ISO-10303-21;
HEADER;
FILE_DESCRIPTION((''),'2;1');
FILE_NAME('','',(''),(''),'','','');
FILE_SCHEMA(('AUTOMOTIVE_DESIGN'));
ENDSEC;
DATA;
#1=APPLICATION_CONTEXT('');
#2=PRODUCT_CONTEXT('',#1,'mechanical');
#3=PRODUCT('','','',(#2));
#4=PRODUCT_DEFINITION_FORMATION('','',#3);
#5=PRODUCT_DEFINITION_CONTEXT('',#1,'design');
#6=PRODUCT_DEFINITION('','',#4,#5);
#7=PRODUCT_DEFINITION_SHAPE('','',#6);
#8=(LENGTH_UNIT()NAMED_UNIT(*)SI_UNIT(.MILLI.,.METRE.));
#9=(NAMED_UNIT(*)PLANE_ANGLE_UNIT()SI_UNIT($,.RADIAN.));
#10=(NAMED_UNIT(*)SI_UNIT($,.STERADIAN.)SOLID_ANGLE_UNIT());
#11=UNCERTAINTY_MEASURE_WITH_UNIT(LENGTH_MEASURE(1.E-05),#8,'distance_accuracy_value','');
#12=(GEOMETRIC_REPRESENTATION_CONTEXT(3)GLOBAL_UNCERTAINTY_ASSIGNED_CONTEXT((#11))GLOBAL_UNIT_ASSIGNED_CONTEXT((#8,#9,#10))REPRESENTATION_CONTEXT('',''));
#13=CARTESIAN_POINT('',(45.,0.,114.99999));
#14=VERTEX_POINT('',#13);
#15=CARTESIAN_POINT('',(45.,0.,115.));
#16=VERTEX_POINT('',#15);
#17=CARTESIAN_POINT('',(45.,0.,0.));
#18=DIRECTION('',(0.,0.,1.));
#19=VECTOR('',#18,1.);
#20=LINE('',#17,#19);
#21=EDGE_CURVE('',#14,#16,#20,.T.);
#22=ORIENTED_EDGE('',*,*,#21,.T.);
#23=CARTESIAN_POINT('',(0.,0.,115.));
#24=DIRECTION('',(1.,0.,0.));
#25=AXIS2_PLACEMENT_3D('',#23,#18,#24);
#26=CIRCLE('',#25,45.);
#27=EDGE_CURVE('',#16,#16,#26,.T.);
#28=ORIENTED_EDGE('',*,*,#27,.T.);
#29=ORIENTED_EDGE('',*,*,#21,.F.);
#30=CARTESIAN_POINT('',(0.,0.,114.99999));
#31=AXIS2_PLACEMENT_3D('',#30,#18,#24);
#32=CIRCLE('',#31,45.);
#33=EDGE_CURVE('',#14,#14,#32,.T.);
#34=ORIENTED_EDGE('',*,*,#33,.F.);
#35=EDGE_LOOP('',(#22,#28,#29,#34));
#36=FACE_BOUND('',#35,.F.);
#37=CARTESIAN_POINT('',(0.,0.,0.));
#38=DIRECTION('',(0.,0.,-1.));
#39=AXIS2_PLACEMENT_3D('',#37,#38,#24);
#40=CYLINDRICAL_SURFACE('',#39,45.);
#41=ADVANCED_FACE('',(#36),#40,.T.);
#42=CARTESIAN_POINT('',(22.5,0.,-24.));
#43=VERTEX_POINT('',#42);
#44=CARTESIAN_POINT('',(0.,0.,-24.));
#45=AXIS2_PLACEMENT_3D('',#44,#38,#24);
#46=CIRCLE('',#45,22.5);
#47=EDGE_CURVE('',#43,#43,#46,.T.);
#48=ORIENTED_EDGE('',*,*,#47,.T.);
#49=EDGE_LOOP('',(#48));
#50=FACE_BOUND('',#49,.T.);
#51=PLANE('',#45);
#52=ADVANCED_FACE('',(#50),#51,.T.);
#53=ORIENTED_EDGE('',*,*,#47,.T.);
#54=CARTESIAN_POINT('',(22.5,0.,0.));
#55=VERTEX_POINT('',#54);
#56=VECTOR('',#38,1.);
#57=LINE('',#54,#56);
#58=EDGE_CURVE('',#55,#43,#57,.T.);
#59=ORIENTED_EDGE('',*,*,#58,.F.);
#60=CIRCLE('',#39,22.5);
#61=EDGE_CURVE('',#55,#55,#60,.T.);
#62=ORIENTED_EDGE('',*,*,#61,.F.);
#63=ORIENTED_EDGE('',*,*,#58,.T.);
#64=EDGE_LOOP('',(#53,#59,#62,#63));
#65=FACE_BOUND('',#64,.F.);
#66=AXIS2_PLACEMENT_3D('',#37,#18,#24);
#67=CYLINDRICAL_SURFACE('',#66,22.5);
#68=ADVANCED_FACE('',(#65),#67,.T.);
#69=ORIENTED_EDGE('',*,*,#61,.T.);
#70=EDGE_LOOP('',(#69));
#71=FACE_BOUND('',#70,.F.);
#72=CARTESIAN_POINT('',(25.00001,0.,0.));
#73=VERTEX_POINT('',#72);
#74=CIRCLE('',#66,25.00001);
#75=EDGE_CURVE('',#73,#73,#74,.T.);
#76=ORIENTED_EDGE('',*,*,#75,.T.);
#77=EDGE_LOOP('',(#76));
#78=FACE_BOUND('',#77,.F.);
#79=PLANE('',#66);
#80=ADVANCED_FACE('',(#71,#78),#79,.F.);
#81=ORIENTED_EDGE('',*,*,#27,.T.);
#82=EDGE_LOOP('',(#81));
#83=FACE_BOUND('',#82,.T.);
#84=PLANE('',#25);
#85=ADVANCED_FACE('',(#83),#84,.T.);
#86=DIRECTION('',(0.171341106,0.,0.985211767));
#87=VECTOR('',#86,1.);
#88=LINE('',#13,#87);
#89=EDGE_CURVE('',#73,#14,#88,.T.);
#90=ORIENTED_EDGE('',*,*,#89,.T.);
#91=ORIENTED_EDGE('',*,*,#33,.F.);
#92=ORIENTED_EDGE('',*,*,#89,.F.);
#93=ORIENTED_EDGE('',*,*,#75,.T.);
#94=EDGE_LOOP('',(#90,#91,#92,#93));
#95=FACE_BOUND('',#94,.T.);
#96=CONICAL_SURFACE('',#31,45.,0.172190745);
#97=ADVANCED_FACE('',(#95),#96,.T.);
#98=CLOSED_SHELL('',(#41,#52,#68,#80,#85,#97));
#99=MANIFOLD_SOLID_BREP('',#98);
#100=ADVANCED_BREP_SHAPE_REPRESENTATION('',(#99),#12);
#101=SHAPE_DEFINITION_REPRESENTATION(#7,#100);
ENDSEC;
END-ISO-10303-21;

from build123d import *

# Parameters (mm, degrees)
F0_R     = 45
F1_DEPTH = 115
F2_R     = 22.5
F3_DEPTH = 24
F4_SIZE2 = 114.99999
F4_SIZE  = 19.99999


# Not quite as in the source:
# - a fillet or chamfer is up to 0.001 mm smaller than in the source, because OpenCascade refuses the exact size


with BuildPart() as f1:
    # F0 (on Top) → F1 (new body)
    with BuildSketch(Plane.XY):
        Circle(F0_R)
    extrude(amount=F1_DEPTH)

    # F2 (on face) → F3 (join)
    with BuildSketch(Plane(origin=(0, 0, 0), x_dir=(1, 0, 0), z_dir=(0, 0, -1))):
        Circle(F2_R)
    extrude(amount=F3_DEPTH)

    # F4 (size 20 and 115 in the source; OpenCascade refuses exactly that, so slightly less here)
    f4_edges = [f1.edges().sort_by_distance(p)[0] for p in [
        (-45, 0, 0),
    ]]
    f4_side = f1.faces().sort_by_distance((-43.727208, 0, 0))[0]
    chamfer(f4_edges, length=F4_SIZE, length2=F4_SIZE2, reference=f4_side)


solid = f1.part
